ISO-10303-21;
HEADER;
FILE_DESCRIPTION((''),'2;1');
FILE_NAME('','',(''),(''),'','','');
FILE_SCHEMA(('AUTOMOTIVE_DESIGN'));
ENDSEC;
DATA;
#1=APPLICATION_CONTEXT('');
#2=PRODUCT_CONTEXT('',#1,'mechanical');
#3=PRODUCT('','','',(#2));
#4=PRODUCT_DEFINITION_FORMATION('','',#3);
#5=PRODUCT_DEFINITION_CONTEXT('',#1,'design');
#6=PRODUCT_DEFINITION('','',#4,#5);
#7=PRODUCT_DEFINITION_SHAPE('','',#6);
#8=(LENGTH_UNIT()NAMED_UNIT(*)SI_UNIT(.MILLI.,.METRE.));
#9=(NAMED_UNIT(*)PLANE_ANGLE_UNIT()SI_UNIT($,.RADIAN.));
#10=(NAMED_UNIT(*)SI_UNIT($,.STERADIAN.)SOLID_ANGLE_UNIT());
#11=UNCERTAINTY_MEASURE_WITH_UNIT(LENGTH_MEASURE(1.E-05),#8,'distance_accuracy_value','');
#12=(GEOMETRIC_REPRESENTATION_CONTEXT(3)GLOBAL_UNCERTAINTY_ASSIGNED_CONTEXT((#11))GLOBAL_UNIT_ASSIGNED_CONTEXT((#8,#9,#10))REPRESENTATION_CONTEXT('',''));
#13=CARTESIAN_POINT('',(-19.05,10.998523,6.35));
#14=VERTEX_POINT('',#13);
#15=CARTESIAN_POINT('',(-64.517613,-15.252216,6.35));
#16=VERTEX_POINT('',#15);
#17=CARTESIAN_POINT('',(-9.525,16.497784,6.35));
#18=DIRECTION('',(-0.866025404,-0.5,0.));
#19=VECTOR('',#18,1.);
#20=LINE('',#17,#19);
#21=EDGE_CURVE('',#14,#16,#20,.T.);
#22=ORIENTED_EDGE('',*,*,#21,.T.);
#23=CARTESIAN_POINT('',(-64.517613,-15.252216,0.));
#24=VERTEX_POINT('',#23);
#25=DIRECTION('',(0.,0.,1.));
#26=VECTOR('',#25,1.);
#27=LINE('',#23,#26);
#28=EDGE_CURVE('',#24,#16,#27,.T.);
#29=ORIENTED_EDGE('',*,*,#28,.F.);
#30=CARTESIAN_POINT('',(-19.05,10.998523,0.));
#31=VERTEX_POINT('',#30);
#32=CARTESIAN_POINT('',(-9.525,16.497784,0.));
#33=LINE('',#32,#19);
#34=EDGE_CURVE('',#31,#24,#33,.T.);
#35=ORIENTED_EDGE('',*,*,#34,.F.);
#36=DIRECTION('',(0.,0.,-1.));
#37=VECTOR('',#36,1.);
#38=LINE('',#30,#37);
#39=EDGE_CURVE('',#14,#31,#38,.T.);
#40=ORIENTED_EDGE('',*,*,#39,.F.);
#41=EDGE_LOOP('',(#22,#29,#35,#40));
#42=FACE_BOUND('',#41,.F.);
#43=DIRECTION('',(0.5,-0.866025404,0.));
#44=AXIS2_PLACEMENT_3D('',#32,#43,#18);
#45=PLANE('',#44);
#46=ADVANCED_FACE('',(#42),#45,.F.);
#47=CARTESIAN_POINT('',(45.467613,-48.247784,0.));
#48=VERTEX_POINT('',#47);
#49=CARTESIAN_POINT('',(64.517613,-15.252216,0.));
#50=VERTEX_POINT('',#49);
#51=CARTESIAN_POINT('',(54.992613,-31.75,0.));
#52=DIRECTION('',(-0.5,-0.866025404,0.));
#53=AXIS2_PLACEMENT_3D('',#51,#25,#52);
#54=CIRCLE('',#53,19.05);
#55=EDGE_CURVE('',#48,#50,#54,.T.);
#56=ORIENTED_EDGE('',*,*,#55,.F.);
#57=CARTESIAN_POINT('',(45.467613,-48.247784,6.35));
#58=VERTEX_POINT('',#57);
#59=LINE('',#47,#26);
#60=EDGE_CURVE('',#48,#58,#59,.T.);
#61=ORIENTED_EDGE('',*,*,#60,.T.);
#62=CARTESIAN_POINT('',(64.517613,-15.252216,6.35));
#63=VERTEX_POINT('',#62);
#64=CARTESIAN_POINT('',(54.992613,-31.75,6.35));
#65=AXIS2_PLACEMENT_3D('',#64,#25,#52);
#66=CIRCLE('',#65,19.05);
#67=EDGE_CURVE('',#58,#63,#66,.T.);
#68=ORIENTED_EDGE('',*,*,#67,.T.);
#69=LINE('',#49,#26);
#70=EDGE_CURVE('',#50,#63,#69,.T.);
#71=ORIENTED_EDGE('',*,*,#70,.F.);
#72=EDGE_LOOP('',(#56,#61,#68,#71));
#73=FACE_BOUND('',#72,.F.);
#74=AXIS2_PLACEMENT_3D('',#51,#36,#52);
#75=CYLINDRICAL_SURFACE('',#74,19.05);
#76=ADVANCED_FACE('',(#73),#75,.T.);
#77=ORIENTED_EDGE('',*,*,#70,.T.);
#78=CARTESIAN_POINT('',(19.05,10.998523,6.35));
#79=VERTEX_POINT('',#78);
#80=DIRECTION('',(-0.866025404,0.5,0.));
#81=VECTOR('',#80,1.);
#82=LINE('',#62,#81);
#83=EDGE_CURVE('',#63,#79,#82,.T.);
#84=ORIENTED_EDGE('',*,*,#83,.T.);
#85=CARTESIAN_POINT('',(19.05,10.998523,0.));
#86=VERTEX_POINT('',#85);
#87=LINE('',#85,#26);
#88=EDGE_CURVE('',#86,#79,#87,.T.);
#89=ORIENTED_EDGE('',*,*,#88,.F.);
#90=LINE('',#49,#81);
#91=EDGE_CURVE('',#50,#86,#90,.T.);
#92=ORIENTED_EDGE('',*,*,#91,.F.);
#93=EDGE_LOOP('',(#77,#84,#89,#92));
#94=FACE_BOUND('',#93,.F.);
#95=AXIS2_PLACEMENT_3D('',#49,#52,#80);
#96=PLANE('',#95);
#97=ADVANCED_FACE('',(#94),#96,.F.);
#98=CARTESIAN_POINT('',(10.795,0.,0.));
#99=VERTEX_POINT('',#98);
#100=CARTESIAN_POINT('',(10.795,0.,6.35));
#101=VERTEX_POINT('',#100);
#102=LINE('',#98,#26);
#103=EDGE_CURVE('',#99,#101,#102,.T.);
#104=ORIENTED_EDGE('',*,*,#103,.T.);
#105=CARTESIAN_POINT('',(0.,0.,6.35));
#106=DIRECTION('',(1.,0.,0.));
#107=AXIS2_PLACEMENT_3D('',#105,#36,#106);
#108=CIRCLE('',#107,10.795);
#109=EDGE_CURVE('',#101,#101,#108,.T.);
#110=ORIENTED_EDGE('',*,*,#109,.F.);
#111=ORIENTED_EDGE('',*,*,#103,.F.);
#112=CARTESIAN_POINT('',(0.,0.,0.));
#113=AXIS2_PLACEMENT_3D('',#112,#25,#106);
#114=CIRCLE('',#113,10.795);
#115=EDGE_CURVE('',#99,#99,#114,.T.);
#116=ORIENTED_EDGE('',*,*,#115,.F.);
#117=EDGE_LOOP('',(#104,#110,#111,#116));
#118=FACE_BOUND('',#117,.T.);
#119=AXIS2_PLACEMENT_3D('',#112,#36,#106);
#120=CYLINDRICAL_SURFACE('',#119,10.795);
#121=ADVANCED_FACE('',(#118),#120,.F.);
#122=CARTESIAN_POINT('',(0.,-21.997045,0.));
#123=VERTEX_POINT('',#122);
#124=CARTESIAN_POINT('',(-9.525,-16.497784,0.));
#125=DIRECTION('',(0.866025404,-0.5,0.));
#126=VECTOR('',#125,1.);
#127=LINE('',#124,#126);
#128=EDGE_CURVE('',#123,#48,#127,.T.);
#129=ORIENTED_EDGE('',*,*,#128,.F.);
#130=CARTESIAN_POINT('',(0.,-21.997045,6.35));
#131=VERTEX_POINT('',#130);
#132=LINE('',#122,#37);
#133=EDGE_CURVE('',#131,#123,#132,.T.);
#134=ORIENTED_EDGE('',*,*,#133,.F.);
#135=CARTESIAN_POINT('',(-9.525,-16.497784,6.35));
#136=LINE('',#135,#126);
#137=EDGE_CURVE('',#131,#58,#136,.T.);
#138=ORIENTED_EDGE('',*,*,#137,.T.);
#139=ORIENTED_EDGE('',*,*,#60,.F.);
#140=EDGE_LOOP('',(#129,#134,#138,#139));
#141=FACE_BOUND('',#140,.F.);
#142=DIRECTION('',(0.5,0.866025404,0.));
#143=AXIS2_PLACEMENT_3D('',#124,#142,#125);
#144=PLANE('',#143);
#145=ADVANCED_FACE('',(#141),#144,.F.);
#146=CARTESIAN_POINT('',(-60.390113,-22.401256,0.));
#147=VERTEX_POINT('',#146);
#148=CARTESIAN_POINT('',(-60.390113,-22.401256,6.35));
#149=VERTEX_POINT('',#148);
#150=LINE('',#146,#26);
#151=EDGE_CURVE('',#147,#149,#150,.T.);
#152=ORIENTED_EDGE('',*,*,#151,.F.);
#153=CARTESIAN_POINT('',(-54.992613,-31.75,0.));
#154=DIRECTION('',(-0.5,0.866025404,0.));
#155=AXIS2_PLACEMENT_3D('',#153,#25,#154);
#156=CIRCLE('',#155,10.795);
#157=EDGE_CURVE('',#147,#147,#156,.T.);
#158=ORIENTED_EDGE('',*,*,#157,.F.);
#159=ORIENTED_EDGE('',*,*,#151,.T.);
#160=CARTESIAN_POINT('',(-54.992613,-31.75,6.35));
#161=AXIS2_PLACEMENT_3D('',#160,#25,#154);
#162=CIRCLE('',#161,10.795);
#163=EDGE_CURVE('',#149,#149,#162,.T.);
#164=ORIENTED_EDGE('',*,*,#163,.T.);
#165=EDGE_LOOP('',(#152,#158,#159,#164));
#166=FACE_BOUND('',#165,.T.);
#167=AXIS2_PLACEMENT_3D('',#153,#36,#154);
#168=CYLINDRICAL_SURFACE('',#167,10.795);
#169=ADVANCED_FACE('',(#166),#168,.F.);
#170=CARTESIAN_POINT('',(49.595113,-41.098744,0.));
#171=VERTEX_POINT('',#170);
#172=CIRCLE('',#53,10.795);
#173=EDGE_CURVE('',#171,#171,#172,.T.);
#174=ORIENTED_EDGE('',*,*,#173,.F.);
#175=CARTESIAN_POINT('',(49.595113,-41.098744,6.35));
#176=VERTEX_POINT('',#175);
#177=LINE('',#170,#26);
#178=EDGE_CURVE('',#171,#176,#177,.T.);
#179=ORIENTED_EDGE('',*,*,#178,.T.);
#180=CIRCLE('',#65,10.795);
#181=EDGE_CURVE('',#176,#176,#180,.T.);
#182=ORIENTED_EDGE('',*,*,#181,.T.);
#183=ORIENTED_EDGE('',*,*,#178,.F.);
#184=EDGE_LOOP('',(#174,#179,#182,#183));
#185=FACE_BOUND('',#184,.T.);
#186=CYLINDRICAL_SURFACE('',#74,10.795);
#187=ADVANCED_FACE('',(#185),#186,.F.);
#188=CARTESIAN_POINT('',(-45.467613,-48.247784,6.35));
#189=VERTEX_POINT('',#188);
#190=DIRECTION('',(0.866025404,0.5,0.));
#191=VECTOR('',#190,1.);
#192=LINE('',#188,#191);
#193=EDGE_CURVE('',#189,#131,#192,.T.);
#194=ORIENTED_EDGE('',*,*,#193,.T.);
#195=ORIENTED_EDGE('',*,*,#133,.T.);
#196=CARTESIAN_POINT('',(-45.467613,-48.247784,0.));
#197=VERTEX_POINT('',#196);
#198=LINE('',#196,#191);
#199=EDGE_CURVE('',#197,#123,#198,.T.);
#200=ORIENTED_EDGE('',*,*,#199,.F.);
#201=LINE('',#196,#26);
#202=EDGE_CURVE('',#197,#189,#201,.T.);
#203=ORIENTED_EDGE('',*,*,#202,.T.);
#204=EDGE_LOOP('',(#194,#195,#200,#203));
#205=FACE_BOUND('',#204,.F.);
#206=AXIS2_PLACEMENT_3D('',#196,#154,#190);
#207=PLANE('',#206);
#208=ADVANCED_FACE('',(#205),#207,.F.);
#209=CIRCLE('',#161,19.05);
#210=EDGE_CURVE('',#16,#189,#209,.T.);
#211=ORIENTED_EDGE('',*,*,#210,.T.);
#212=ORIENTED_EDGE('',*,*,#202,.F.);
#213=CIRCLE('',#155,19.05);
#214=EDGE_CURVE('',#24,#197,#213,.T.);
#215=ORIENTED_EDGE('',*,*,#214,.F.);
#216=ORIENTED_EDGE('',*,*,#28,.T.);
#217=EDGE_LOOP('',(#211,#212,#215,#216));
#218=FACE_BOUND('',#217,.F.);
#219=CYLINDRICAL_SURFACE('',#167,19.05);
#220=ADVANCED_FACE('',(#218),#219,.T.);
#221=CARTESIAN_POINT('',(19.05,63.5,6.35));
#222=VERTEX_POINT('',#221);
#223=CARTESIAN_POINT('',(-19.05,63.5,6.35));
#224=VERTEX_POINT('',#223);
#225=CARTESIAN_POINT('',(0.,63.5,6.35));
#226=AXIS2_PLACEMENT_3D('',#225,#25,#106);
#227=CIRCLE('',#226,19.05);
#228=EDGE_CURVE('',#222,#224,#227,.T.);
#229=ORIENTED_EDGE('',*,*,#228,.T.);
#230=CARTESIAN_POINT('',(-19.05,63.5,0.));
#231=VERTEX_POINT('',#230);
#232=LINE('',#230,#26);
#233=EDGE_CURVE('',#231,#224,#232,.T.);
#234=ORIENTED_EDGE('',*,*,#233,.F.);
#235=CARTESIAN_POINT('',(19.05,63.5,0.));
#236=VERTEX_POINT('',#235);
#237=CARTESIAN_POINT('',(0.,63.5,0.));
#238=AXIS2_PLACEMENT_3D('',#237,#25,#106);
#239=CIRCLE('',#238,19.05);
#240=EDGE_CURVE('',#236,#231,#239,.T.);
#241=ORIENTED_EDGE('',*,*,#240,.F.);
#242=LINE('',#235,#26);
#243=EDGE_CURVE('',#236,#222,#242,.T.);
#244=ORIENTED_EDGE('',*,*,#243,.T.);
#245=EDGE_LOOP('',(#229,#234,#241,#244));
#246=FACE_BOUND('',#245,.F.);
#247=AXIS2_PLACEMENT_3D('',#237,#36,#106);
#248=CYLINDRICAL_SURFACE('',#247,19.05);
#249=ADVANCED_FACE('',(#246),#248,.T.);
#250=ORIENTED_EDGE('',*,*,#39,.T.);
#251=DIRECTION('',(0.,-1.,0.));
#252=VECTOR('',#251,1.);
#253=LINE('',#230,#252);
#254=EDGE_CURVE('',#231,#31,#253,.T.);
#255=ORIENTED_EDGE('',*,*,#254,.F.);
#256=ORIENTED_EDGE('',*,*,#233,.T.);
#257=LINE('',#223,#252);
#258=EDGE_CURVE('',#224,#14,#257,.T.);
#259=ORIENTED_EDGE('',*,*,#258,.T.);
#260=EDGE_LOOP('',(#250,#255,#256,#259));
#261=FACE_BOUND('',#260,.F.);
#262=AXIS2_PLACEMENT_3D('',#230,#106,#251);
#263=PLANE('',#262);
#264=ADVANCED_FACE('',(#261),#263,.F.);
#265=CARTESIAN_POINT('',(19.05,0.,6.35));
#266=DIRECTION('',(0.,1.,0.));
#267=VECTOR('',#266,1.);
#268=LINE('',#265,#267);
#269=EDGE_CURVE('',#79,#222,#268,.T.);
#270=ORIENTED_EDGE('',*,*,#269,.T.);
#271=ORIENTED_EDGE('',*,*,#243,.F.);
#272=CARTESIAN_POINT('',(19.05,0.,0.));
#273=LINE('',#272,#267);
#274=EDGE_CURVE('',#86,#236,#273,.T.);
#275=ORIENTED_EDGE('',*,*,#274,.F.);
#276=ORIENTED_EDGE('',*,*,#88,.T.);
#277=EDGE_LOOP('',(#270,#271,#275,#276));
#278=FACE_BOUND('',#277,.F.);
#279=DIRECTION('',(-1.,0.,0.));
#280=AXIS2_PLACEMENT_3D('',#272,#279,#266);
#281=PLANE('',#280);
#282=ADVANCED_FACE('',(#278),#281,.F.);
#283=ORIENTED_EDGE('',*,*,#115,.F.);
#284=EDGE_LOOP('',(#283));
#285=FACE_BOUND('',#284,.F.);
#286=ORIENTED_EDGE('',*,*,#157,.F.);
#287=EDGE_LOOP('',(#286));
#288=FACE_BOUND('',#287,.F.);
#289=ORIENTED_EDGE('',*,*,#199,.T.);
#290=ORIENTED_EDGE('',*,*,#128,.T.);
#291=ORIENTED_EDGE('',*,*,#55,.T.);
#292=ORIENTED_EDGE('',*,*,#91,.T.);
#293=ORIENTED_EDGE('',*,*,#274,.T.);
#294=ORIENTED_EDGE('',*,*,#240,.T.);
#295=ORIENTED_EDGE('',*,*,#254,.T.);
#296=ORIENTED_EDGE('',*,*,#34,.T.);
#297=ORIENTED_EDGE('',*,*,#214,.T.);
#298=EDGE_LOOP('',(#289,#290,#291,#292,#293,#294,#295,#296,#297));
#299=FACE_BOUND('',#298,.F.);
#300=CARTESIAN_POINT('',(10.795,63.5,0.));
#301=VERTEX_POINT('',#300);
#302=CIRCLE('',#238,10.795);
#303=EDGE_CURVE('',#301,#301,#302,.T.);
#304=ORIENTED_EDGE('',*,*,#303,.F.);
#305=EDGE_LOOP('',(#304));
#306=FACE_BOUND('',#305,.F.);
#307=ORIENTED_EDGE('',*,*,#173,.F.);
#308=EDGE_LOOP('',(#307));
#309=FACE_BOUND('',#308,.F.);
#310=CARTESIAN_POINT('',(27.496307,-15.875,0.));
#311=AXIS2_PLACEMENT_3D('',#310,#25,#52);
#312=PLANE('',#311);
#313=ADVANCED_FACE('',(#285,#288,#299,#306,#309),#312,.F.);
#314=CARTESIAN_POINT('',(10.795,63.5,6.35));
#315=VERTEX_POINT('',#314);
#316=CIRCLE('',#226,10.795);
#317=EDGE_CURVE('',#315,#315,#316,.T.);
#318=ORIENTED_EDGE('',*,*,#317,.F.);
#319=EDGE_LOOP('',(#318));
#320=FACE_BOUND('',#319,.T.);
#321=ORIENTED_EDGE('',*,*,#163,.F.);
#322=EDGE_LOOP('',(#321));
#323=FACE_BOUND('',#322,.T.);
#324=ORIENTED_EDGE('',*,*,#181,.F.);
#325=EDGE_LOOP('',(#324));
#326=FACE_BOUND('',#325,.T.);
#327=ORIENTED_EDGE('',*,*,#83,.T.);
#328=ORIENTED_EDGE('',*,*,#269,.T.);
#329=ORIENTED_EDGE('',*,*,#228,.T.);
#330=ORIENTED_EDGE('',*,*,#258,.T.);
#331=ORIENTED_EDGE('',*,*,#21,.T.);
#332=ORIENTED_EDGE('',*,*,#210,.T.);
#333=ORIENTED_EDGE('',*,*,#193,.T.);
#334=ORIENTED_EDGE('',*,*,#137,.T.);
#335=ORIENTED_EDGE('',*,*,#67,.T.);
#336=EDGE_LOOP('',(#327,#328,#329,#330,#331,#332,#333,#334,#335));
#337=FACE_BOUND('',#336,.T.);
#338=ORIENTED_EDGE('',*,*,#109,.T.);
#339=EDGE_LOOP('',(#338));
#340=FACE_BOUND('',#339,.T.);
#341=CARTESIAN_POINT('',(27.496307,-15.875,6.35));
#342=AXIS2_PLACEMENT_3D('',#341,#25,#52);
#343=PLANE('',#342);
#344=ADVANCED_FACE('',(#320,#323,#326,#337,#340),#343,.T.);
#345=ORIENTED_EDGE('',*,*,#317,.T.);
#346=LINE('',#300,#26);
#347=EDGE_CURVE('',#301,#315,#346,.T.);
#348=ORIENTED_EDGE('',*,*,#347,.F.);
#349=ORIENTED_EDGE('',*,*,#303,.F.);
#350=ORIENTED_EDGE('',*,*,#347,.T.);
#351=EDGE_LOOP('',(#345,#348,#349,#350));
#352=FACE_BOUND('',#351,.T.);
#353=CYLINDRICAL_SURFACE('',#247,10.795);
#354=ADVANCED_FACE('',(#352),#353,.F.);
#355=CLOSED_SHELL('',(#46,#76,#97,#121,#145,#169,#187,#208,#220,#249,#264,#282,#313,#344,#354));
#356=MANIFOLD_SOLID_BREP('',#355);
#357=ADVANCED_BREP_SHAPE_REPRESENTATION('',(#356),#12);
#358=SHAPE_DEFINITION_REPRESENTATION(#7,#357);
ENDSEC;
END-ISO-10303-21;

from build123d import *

# Parameters (mm, degrees)
F0_R            = 10.795
F1_DEPTH        = 6.35
F1_COPIES_COUNT = 3


# Not quite as in the source:
# - a pattern or mirror of a feature is missing from the dataset's text; its kind, count and spacing are read off the source's solid


with BuildPart() as f1:
    # F0 (on Top) → F1 (new body)
    with BuildSketch(Plane.XY):
        with BuildLine():
            Line((-19.05, 63.5), (-19.05, 0))
            ThreePointArc((-19.05, 0), (0, -19.05), (19.05, 0))
            Line((19.05, 0), (19.05, 63.5))
            ThreePointArc((19.05, 63.5), (0, 82.55), (-19.05, 63.5))
        make_face()
        Circle(F0_R, mode=Mode.SUBTRACT)
        with Locations((0, 63.5)):
            Circle(F0_R, mode=Mode.SUBTRACT)
    extrude(amount=F1_DEPTH)

    # F1_copies: F1 ×3 about axis
    f1_copies_axis = Axis((0, 0, 0), (0, 0, 1))


with BuildPart() as f1_1:
    add(f1.part)
    for i in range(1, F1_COPIES_COUNT):
        add(f1.part.rotate(f1_copies_axis, i * 360 / F1_COPIES_COUNT))


solid = f1_1.part
